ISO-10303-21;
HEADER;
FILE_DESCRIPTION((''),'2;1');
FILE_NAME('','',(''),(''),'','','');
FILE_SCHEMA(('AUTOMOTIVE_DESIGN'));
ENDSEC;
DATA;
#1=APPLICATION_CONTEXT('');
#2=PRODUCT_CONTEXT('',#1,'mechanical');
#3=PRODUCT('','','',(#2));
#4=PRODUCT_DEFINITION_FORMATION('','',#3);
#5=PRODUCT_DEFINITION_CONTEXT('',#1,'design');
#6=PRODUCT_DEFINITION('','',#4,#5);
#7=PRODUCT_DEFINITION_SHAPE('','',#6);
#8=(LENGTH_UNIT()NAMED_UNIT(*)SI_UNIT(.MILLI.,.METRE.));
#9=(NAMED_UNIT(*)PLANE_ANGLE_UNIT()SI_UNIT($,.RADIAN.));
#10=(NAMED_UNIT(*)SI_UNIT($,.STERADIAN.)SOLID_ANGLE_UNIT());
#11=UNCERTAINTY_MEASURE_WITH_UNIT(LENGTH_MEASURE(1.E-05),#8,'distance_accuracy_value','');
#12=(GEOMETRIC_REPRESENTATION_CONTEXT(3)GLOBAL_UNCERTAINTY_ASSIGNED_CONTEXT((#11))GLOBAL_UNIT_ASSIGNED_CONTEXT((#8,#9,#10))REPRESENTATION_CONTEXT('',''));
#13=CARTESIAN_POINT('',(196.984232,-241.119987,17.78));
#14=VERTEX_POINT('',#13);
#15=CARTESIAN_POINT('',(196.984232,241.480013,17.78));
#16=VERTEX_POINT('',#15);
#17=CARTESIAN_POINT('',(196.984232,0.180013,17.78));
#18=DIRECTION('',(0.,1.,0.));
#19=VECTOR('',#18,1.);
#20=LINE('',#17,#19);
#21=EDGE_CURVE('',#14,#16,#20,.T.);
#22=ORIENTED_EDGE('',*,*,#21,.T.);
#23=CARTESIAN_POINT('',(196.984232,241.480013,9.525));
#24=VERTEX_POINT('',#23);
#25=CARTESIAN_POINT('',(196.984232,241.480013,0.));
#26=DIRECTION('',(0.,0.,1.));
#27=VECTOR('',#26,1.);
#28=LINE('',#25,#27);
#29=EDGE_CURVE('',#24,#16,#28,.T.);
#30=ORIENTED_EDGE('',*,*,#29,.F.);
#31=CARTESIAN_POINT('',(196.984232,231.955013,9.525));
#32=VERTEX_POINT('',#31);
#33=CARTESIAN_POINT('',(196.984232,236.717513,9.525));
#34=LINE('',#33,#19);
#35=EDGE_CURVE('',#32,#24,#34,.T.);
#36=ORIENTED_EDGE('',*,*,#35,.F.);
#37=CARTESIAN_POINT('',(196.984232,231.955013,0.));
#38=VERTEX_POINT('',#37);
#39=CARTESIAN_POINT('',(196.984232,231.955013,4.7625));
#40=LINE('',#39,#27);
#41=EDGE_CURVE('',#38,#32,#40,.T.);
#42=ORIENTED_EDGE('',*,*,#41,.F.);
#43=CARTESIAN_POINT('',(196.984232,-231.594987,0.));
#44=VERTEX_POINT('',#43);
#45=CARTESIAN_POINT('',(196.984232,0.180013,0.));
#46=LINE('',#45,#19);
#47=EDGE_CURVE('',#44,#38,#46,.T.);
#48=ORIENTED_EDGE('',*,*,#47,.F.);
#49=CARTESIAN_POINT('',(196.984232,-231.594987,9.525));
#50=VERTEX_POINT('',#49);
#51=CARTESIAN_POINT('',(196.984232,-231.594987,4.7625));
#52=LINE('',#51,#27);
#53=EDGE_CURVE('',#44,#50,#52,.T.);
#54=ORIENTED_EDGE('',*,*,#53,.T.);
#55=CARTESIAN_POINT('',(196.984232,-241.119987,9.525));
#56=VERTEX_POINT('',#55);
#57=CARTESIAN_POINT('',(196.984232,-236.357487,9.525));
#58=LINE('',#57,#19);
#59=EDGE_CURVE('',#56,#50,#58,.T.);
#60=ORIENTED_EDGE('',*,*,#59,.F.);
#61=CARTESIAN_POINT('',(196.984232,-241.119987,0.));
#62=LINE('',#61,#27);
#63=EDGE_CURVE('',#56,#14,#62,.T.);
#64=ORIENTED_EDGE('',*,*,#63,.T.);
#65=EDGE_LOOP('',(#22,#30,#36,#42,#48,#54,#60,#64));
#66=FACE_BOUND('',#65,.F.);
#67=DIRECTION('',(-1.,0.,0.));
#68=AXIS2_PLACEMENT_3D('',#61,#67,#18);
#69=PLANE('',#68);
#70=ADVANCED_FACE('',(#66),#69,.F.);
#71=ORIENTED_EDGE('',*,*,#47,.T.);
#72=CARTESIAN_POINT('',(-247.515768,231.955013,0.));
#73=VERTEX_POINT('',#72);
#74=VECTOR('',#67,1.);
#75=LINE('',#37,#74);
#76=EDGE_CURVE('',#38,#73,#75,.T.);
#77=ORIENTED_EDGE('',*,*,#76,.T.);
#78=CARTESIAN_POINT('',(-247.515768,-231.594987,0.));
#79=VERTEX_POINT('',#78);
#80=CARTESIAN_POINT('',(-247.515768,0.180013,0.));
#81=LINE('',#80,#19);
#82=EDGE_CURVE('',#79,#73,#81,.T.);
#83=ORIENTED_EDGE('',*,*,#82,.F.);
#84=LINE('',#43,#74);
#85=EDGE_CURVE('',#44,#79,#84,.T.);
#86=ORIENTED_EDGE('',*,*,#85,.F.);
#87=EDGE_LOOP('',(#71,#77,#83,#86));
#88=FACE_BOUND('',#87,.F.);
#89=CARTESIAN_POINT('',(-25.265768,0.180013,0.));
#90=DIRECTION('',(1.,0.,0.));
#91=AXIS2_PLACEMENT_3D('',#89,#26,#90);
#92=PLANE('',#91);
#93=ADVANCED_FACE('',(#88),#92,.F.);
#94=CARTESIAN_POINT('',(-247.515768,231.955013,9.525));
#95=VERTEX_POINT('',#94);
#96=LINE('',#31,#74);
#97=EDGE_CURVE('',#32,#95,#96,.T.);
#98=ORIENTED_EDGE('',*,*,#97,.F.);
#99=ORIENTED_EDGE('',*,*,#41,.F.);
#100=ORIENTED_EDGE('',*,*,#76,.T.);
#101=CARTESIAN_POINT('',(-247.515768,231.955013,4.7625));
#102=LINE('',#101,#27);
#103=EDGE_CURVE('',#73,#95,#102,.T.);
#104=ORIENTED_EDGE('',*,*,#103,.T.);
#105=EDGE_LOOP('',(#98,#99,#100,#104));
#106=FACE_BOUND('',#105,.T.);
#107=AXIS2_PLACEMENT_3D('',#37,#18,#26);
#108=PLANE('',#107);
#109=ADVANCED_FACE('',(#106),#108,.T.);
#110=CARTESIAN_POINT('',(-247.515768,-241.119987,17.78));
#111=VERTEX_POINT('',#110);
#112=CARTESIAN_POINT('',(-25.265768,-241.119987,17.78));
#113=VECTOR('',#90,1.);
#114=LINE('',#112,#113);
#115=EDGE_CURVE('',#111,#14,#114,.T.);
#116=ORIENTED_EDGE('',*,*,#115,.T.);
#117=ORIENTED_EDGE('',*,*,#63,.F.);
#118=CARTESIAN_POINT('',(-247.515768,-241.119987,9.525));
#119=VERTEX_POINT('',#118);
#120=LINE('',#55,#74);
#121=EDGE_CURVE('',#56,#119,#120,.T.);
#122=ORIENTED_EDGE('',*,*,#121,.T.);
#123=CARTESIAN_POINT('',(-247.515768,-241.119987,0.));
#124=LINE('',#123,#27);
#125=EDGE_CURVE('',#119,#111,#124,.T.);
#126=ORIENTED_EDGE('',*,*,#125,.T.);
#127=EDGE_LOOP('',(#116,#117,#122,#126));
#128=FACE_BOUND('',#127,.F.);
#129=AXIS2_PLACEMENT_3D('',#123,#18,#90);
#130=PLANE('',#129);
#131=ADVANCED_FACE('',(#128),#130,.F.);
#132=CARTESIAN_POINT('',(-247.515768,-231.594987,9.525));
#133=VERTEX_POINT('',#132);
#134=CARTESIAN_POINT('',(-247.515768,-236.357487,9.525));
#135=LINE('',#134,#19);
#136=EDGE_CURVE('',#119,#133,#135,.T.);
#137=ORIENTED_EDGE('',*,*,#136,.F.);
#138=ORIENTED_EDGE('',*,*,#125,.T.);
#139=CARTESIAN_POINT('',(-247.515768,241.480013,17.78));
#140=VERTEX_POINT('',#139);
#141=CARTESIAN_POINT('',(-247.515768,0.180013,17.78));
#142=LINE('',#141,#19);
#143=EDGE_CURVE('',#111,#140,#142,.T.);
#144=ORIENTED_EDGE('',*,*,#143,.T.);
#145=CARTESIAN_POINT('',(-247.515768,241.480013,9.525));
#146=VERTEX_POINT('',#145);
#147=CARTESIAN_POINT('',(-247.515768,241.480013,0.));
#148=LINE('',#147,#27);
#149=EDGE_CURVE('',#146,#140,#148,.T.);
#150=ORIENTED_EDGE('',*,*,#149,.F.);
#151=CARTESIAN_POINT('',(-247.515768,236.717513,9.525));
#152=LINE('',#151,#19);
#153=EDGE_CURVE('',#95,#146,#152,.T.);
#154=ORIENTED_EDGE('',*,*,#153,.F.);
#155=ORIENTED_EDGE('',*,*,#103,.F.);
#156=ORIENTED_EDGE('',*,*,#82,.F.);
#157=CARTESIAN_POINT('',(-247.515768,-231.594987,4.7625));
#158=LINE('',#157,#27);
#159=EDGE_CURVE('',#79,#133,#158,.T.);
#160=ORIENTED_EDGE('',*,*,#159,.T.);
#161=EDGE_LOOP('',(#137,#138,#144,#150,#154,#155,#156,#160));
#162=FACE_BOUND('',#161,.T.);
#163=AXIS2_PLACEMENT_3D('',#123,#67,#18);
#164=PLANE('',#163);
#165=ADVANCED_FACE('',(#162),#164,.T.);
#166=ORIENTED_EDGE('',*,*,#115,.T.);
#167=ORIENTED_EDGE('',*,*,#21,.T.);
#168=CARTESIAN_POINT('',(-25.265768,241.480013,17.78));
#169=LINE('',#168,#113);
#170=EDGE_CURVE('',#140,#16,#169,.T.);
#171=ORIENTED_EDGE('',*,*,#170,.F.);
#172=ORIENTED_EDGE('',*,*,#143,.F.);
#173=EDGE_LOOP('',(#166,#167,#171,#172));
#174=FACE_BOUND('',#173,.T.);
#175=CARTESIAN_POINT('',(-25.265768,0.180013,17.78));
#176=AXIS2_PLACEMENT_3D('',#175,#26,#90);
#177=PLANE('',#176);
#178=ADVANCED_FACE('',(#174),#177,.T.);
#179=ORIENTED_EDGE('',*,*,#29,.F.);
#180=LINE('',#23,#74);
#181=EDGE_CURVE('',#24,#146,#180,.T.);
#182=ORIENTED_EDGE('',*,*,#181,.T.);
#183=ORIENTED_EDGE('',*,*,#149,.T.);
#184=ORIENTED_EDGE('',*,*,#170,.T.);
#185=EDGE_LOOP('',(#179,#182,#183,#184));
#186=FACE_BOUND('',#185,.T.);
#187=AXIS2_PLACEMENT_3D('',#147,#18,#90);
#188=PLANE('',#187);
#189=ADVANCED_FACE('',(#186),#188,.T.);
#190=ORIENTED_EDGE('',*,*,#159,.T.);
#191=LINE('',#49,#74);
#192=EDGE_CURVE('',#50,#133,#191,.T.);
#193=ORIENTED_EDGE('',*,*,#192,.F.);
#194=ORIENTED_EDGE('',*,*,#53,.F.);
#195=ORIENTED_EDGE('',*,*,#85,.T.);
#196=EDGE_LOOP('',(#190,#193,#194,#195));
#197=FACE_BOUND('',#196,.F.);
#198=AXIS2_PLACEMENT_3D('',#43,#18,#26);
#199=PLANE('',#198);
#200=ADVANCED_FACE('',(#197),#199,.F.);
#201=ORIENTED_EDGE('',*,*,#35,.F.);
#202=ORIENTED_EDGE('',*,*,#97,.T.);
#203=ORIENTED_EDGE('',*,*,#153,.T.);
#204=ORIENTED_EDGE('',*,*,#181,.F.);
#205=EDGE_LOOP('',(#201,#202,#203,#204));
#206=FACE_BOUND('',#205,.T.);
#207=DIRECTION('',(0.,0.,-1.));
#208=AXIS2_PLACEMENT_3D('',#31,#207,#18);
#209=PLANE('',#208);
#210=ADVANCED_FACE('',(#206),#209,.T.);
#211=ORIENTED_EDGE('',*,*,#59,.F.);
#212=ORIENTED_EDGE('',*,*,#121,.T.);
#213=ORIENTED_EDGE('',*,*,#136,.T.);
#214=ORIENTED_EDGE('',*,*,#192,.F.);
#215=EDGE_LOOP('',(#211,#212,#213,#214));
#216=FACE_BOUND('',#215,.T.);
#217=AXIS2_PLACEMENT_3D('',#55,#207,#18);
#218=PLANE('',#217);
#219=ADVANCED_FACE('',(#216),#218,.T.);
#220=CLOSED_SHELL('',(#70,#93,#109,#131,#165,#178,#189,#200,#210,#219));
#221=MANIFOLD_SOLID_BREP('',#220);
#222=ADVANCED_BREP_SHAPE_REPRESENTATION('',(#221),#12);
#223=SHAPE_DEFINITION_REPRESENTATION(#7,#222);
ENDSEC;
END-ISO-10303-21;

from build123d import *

# Parameters (mm, degrees)
F0_W     = 444.5
F0_H     = 482.6
F1_DEPTH = 17.78
F2_W     = 9.525
F2_H     = 9.525
F3_DEPTH = 444.5


# Not quite as in the source:
# - a feature of the source that left no trace in its solid (it failed there, or was rolled back) is left out


with BuildPart() as f1:
    # F0 (on Top) → F1 (new body)
    with BuildSketch(Plane.XY):
        with Locations((-25.2657681704, 0.1800126585)):
            Rectangle(F0_W, F0_H)
    extrude(amount=F1_DEPTH)

    # F2 (on face) → F3 (cut)
    with BuildSketch(Plane.YZ.offset(196.9842318296)):
        with Locations((236.7175126585, 4.7625)):
            Rectangle(F2_W, F2_H)
        with Locations((-236.3574873415, 4.7625)):
            Rectangle(F2_W, F2_H)
    extrude(amount=-F3_DEPTH, mode=Mode.SUBTRACT)


solid = f1.part
